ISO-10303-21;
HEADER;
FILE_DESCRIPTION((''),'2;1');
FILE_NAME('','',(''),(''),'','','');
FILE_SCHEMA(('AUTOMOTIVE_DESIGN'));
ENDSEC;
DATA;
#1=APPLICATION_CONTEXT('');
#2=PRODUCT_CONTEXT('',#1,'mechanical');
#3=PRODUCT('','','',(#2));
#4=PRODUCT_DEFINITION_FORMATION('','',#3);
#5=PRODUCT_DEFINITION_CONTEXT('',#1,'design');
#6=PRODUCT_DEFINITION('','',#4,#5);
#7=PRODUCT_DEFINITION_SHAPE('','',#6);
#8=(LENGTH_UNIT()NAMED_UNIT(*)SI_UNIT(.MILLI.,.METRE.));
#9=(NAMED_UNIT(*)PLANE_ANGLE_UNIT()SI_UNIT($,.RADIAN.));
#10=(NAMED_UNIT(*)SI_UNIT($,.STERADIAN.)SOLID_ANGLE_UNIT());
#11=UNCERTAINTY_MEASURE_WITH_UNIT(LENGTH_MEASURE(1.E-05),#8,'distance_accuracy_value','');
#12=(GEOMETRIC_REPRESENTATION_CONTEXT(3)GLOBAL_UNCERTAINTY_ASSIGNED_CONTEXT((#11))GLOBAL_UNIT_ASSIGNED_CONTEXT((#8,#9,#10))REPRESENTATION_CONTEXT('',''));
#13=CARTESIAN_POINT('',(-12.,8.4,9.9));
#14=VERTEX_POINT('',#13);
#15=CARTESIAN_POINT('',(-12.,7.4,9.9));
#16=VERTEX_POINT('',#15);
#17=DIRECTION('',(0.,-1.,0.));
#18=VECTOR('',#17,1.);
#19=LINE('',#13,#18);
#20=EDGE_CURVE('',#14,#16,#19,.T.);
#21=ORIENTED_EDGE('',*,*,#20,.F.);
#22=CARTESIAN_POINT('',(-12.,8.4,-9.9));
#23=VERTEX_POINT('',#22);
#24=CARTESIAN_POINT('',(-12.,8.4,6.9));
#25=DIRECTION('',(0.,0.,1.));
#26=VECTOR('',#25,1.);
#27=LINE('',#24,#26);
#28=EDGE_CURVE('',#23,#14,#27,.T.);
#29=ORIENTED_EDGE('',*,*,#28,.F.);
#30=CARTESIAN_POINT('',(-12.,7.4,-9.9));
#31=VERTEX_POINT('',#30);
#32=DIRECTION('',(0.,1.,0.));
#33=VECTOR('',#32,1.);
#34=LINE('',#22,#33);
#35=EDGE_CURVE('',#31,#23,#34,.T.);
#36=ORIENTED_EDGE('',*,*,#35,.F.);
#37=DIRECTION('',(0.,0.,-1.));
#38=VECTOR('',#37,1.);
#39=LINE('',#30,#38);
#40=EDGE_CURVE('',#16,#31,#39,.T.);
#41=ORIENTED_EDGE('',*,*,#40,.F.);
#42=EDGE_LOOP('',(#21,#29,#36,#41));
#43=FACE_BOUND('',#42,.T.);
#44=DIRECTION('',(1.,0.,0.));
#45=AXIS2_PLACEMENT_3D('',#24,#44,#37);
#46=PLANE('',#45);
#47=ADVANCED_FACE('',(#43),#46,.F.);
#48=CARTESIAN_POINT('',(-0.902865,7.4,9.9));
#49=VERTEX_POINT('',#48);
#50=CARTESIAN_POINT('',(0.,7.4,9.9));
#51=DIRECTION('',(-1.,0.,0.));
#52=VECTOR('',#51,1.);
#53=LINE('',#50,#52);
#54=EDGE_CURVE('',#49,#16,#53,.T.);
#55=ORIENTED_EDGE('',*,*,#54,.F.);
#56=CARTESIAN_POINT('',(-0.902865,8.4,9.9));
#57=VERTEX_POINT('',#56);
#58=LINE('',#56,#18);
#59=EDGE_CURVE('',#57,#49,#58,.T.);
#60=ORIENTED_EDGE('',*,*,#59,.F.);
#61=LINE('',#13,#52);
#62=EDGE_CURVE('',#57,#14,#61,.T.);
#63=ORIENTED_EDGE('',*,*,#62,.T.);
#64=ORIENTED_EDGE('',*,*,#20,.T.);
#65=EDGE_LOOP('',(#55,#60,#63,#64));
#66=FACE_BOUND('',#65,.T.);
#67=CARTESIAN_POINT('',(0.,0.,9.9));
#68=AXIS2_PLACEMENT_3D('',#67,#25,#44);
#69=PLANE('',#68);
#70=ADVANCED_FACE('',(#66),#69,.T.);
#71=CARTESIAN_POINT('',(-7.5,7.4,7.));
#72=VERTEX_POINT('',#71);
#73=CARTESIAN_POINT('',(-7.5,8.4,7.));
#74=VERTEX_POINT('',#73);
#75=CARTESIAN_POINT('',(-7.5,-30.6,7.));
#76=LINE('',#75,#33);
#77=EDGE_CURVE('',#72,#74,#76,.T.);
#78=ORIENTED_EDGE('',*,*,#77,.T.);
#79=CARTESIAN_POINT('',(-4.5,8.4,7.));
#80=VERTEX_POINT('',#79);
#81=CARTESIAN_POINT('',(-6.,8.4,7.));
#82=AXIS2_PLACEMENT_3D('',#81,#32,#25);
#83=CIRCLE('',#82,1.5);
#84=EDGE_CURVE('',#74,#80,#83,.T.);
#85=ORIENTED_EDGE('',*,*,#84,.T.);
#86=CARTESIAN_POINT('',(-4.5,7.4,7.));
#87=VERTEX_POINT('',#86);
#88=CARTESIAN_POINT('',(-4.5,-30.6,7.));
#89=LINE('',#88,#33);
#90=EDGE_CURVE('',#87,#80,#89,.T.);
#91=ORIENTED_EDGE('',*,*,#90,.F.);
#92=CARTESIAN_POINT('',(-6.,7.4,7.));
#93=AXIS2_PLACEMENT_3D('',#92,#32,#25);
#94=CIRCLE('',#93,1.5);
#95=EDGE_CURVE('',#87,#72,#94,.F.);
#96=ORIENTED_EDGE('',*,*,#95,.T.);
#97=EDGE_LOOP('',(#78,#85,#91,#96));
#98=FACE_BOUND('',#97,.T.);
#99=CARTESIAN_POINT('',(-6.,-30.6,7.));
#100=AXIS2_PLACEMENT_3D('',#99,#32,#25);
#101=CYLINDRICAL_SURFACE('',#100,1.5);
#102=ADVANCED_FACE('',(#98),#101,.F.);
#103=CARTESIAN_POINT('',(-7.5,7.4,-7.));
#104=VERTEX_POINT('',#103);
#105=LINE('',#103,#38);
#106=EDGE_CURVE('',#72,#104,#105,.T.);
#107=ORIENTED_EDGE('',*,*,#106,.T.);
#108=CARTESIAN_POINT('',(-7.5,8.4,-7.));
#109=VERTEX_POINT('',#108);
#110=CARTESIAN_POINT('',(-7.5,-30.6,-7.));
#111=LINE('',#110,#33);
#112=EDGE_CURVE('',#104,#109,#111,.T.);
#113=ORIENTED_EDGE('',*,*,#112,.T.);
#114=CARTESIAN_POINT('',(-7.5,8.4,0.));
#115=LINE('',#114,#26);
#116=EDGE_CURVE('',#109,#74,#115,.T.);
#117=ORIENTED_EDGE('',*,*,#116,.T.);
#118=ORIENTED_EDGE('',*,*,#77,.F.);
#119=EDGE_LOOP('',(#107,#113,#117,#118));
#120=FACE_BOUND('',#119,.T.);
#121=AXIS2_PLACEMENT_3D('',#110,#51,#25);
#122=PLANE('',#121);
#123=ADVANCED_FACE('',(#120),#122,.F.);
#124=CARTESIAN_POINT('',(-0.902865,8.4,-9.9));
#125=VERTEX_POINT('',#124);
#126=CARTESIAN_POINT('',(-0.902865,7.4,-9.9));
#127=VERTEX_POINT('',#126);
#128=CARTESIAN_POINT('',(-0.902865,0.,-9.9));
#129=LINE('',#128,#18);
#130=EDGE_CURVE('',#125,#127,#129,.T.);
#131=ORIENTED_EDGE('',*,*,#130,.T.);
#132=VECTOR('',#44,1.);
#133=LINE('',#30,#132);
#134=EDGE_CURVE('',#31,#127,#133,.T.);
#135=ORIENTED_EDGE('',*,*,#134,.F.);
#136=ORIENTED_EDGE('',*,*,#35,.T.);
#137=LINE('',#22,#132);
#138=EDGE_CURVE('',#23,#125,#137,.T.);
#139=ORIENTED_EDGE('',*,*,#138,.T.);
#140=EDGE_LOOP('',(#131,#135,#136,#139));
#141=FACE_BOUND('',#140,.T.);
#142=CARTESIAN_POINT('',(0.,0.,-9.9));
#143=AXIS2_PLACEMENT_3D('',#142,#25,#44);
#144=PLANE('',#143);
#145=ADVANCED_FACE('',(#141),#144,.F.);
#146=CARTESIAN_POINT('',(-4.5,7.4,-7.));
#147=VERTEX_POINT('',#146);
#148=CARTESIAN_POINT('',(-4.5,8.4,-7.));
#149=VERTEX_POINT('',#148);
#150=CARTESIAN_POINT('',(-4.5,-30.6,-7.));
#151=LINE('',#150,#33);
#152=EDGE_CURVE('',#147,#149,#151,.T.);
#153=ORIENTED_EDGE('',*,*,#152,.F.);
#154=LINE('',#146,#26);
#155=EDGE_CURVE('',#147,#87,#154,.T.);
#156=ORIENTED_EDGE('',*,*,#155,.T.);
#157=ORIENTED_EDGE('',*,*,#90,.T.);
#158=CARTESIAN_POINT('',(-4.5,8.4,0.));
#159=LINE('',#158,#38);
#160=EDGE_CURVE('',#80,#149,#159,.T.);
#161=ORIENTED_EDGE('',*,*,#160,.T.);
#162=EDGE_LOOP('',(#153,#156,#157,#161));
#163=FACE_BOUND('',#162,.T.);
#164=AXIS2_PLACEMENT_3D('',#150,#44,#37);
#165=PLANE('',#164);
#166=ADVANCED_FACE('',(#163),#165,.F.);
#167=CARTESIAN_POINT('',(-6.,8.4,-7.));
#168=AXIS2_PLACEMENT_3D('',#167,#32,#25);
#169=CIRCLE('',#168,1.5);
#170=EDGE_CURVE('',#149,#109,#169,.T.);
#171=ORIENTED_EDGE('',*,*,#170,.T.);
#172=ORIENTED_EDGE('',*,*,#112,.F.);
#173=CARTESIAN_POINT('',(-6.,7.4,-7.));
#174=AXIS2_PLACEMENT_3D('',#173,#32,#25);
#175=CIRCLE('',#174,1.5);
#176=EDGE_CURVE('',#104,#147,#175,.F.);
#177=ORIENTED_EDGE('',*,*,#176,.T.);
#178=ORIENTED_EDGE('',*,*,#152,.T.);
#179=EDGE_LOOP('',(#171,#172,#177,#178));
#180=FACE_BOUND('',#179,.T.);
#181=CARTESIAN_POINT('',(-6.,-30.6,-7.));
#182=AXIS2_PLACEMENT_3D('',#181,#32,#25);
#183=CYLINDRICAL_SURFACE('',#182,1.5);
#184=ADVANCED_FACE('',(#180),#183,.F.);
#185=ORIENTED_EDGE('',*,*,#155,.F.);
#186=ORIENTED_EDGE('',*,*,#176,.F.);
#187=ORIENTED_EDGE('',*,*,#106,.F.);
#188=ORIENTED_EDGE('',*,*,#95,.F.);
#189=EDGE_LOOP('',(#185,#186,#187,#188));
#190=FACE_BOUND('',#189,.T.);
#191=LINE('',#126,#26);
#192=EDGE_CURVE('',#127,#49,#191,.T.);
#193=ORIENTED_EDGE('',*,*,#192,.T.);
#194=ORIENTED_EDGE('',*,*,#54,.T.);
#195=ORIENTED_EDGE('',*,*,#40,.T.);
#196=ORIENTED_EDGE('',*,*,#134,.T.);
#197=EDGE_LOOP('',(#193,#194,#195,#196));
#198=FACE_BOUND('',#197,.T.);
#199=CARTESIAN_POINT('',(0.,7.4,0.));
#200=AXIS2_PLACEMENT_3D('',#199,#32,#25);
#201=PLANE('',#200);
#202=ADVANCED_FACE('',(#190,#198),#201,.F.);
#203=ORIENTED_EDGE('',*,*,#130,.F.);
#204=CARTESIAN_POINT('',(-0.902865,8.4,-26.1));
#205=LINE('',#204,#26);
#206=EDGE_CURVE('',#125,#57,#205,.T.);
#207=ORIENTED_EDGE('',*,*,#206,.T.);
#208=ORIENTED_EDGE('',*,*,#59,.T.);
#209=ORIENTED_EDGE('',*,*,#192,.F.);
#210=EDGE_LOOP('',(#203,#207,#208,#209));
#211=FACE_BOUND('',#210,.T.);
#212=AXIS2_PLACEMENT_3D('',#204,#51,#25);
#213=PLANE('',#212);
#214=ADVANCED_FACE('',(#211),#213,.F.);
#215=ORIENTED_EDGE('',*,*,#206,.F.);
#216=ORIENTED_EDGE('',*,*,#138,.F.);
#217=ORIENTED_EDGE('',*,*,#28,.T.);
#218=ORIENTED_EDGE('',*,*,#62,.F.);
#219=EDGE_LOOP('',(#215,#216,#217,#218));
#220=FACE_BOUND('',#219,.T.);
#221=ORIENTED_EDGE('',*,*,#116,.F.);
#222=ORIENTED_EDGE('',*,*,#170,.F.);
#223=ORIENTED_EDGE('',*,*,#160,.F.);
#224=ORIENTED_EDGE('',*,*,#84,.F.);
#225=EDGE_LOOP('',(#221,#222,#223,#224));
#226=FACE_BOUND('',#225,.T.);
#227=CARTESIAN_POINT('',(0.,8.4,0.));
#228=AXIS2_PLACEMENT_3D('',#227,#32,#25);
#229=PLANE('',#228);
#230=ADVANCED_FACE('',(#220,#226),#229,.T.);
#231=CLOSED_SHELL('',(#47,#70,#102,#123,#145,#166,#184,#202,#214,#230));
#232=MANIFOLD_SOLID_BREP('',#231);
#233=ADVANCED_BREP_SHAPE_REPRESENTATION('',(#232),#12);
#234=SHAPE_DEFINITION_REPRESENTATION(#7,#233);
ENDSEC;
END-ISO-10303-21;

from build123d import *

# Parameters (mm, degrees)
SKETCH1_W               = 13.8
SKETCH1_H               = 8.8
BOSS_EXTRUDE1_DEPTH     = 3
SKETCH2_W               = 2
SKETCH2_H               = 35
BOSS_EXTRUDE2_DEPTH     = 3
SKETCH3_W               = 1.2
SKETCH3_H               = 6
BOSS_EXTRUDE3_DEPTH     = 7
FILLET3_R               = 10
SKETCH5_W               = 15
SKETCH5_H               = 13.8
BOSS_EXTRUDE4_DEPTH     = 4
SKETCH6_R               = 1.5
CUT_EXTRUDE4_DEPTH      = 38.968539608
BOSS_EXTRUDE5_DEPTH     = 2
CHAMFER2_SIZE           = 3
BOSS_EXTRUDE7_DEPTH     = 1.2
SKETCH12_W              = 15
SKETCH12_H              = 4
BOSS_EXTRUDE8_DEPTH     = 3
SKETCH13_W              = 15
SKETCH13_H              = 4
BOSS_EXTRUDE9_DEPTH     = 3
CUT_EXTRUDE7_DEPTH      = 43.28486727
CUT_EXTRUDE7_DEPTH_BACK = 43.28486727
CUT_EXTRUDE8_DEPTH      = 43.28486727
CUT_EXTRUDE8_DEPTH_BACK = 43.28486727
SKETCH15_W              = 0.807911756
SKETCH15_H              = 0.64
CUT_EXTRUDE9_DEPTH      = 41.244591358
CUT_EXTRUDE9_DEPTH_BACK = 41.244591358
SKETCH16_W              = 0.64
SKETCH16_H              = 0.6
CHAMFER3_SIZE           = 1
SKETCH18_W              = 20.701942652
SKETCH18_H              = 41.728044518
CUT_EXTRUDE10_DEPTH     = 36
SKETCH19_W              = 11.097134513
SKETCH19_H              = 20.928514419
CUT_EXTRUDE11_DEPTH     = 3


# Some blends are built 0.0001 mm under size
with BuildPart() as part:
    # Sketch1 → Boss-Extrude1 (new body)
    with BuildSketch(Plane(origin=(0, 0, 0), x_dir=(0, 0, -1), z_dir=(1, 0, 0))):
        Rectangle(SKETCH1_W, SKETCH1_H)
    extrude(amount=BOSS_EXTRUDE1_DEPTH)

    # Sketch2 → Boss-Extrude2 (add)
    with BuildSketch(Plane(origin=(3, 0, 0), x_dir=(0, 0, -1), z_dir=(1, 0, 0))):
        with Locations((0, -13.1)):
            Rectangle(SKETCH2_W, SKETCH2_H)
    extrude(amount=BOSS_EXTRUDE2_DEPTH)

    # Sketch3 → Boss-Extrude3 (add)
    with BuildSketch(Plane(origin=(6, 0, 0), x_dir=(0, 0, -1), z_dir=(1, 0, 0))):
        with Locations((0, -27.6)):
            Rectangle(SKETCH3_W, SKETCH3_H)
    extrude(amount=BOSS_EXTRUDE3_DEPTH)

    # Fillet3
    # the kernel refuses this fillet: 10 mm, written as the material it adds along each edge
    with BuildSketch(Plane(origin=(3, -4.4, 1), x_dir=(-1, 0, 0), z_dir=(0, 0, -1))) as fillet3_piece_1:
        with BuildLine():
            CenterArc((10, -7.141428429), FILLET3_R, 134.427004001, 45.572995999)
            Line((0, -7.141428429), (0, 0))
            Line((0, 0), (3, 0))
        make_face()
    extrude(amount=2)

    # Sketch5 → Boss-Extrude4 (add)
    with BuildSketch(Plane(origin=(0, 4.4, 0), x_dir=(1, 0, 0), z_dir=(0, 1, 0))):
        with Locations((-4.5, 0)):
            Rectangle(SKETCH5_W, SKETCH5_H)
    extrude(amount=BOSS_EXTRUDE4_DEPTH)

    # Sketch6 → Cut-Extrude4 (cut, through all)
    with BuildSketch(Plane.XZ.offset(-4.4)):
        with Locations(Location((-6, 3, 0), (0, 0, 270))):
            Circle(SKETCH6_R)
        with Locations(Location((-6, -3, 0), (0, 0, 270))):
            Circle(SKETCH6_R)
    extrude(amount=-CUT_EXTRUDE4_DEPTH, mode=Mode.SUBTRACT)

    # Sketch8 → Boss-Extrude5 (add)
    with BuildSketch(Plane(origin=(0, 0, -1), x_dir=(-1, 0, 0), z_dir=(0, 0, -1))):
        Polygon((-3, -18.758153574), (0, -4.4), (-3, -4.4), align=None)
    extrude(amount=-BOSS_EXTRUDE5_DEPTH)

    # Chamfer2
    chamfer2_edges = [part.edges().sort_by_distance(p)[0] for p in [
        (3, 4.4, 0),
    ]]
    chamfer(chamfer2_edges, length=CHAMFER2_SIZE - 0.0001)  # a hair under: the kernel refuses the full size

    # Sketch11 → Boss-Extrude7 (add)
    with BuildSketch(Plane(origin=(0, 0, -0.6), x_dir=(-1, 0, 0), z_dir=(0, 0, -1))):
        Polygon((-6, -24.6), (-13, -24.6), (-6, 1.742521041), align=None)
    extrude(amount=-BOSS_EXTRUDE7_DEPTH)

    # Sketch12 → Boss-Extrude8 (add)
    with BuildSketch(Plane(origin=(0, 0, -6.9), x_dir=(-1, 0, 0), z_dir=(0, 0, -1))):
        with Locations((4.5, 6.4)):
            Rectangle(SKETCH12_W, SKETCH12_H)
    extrude(amount=BOSS_EXTRUDE8_DEPTH)

    # Sketch13 → Boss-Extrude9 (add)
    with BuildSketch(Plane.XY.offset(6.9)):
        with Locations((-4.5, 6.4)):
            Rectangle(SKETCH13_W, SKETCH13_H)
    extrude(amount=BOSS_EXTRUDE9_DEPTH)

    # Sketch14 → Cut-Extrude7 (cut, two sides: drawn at the far end of the back side and taken through both)
    with BuildSketch(Plane(origin=(0, 8.4, 0), x_dir=(1, 0, 0), z_dir=(0, 1, 0)).offset(-CUT_EXTRUDE7_DEPTH_BACK)):
        with BuildLine():
            Line((-7.5, 7), (-7.5, -7))
            ThreePointArc((-7.5, -7), (-6, -8.5), (-4.5, -7))
            Line((-4.5, -7), (-4.5, 7))
            ThreePointArc((-4.5, 7), (-6, 8.5), (-7.5, 7))
        make_face()
    extrude(amount=CUT_EXTRUDE7_DEPTH + CUT_EXTRUDE7_DEPTH_BACK, mode=Mode.SUBTRACT)

    # Sketch15 → Cut-Extrude8 (cut, two sides: drawn at the far end of the back side and taken through both)
    with BuildSketch(Plane.XZ.offset(30.6).offset(-CUT_EXTRUDE8_DEPTH_BACK)):
        with Locations((12.596044122, 0)):
            Rectangle(SKETCH15_W, SKETCH15_H)
    extrude(amount=CUT_EXTRUDE8_DEPTH + CUT_EXTRUDE8_DEPTH_BACK, mode=Mode.SUBTRACT)

    # Sketch16 → Cut-Extrude9 (cut, two sides: drawn at the far end of the back side and taken through both)
    with BuildSketch(Plane(origin=(12.192088244, 0, 0), x_dir=(0, 0, -1), z_dir=(1, 0, 0)).offset(-CUT_EXTRUDE9_DEPTH_BACK)):
        with Locations((0, -30.3)):
            Rectangle(SKETCH16_W, SKETCH16_H)
    extrude(amount=CUT_EXTRUDE9_DEPTH + CUT_EXTRUDE9_DEPTH_BACK, mode=Mode.SUBTRACT)

    # Chamfer3
    chamfer3_edges = [part.edges().sort_by_distance(p)[0] for p in [
        (12.192088244, -30, 0),
    ]]
    chamfer(chamfer3_edges, length=CHAMFER3_SIZE)

    # Sketch18 → Cut-Extrude10 (cut)
    with BuildSketch(Plane.XY.offset(9.9)):
        with Locations((9.448105839, -12.464022259)):
            Rectangle(SKETCH18_W, SKETCH18_H)
    extrude(amount=-CUT_EXTRUDE10_DEPTH, mode=Mode.SUBTRACT)

    # Sketch19 → Cut-Extrude11 (cut)
    with BuildSketch(Plane.XZ.offset(-4.4)):
        with Locations((-6.451432743, 0.56425721)):
            Rectangle(SKETCH19_W, SKETCH19_H)
    extrude(amount=-CUT_EXTRUDE11_DEPTH, mode=Mode.SUBTRACT)


solid = part.part
